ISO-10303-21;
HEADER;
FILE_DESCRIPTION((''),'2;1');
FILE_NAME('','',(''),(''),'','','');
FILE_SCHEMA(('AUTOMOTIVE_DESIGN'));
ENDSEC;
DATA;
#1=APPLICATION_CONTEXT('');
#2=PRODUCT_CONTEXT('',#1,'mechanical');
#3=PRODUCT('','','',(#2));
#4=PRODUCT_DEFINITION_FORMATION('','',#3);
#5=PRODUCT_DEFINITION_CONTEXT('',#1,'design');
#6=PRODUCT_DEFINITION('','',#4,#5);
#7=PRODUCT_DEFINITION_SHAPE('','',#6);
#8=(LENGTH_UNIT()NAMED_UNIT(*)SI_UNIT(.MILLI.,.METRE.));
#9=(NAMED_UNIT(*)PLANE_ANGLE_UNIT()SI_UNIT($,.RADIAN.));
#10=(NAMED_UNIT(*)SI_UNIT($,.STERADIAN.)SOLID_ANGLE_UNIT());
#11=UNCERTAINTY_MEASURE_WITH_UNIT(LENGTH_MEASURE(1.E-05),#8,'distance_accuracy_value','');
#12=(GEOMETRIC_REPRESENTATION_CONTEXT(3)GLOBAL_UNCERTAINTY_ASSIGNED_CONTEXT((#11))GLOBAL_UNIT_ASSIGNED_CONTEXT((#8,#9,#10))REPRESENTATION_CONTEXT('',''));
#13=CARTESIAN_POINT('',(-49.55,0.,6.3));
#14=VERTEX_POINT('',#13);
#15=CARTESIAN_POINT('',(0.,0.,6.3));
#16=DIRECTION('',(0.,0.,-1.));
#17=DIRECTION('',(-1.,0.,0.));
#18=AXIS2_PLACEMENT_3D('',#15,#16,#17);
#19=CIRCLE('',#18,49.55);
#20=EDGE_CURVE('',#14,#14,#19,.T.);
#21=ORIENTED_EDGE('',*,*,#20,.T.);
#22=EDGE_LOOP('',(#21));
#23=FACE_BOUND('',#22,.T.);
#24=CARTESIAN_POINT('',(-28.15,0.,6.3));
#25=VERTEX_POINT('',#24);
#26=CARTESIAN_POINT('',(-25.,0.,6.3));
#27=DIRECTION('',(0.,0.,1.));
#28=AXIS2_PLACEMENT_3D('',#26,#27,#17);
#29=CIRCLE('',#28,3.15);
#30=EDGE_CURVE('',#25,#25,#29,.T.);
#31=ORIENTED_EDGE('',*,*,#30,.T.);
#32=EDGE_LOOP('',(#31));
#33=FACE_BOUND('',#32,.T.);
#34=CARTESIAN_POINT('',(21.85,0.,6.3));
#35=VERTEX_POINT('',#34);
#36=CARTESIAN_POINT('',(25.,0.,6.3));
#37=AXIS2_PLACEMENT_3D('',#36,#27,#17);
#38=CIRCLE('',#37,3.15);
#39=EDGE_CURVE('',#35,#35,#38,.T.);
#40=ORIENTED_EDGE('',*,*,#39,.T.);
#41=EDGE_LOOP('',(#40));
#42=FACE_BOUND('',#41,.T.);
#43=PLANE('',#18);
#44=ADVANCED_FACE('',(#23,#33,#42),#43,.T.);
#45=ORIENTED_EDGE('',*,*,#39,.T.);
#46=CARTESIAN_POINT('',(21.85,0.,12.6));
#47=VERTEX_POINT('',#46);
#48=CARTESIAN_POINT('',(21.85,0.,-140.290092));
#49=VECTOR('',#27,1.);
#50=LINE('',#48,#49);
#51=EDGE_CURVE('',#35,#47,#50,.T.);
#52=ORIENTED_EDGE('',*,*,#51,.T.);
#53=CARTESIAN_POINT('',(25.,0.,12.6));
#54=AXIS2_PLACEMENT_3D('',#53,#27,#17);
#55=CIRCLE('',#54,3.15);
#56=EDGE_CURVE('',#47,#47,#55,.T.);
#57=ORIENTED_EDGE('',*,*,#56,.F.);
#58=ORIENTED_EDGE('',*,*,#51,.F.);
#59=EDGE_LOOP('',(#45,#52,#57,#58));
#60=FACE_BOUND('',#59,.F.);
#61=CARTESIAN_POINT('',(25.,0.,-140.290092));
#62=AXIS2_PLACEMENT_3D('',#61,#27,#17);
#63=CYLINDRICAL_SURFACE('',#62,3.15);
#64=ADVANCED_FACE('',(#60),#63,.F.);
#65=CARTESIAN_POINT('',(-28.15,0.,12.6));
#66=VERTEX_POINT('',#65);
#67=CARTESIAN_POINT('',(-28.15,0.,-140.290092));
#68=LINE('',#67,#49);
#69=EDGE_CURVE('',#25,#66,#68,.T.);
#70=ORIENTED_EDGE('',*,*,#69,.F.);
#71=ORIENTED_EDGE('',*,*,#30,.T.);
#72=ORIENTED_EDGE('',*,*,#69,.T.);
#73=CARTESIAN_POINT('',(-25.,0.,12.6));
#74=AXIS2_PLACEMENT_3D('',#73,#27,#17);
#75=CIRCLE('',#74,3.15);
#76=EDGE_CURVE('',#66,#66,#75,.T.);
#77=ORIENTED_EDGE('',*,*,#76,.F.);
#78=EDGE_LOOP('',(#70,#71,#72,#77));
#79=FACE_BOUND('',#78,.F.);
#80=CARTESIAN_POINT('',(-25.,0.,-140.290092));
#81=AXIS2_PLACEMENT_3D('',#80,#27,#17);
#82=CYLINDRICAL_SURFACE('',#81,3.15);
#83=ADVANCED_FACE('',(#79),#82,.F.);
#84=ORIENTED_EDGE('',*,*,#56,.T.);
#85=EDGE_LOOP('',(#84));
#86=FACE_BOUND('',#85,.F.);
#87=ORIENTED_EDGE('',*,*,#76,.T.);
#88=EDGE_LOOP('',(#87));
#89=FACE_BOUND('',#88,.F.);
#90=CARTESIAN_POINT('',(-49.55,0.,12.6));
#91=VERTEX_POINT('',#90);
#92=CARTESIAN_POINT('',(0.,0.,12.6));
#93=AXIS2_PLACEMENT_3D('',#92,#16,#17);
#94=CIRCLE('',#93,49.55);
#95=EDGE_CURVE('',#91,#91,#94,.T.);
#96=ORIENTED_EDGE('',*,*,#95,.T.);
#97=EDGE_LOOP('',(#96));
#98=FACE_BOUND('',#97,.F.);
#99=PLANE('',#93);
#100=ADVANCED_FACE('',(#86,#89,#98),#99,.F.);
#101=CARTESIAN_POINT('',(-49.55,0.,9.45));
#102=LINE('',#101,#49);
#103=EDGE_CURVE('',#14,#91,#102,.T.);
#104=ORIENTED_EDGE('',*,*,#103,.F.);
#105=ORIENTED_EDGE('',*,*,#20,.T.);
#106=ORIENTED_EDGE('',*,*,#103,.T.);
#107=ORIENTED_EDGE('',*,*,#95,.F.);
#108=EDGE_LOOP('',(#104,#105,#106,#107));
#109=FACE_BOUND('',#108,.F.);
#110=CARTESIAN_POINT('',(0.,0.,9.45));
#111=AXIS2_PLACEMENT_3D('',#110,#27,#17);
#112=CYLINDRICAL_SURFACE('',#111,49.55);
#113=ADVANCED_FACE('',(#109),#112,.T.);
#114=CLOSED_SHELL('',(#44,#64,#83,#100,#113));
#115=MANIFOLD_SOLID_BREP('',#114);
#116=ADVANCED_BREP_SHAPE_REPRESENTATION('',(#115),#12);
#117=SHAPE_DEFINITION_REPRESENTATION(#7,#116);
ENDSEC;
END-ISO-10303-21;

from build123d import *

# Parameters (mm, degrees)
F0_W = 49.55
F0_H = 6.3
F3_D = 6.3


# Not quite as in the source:
# - a feature names something its author has since deleted; it is built from what else it names


with BuildPart() as f1:
    # F0 (on Front) → F1 (revolve)
    with BuildSketch(Plane.XZ):
        with Locations((-24.775, 9.45)):
            Rectangle(F0_W, F0_H)
    revolve(axis=Axis((0, 0, -5.1516543608), (0, 0, -1)))

    # F3 (through all)
    with Locations(Plane(origin=(0, 0, 0), x_dir=(1, 0, 0), z_dir=(0, 0, -1))):
        with Locations((25, 0), (-25, 0)):
            Hole(F3_D / 2)


solid = f1.part
